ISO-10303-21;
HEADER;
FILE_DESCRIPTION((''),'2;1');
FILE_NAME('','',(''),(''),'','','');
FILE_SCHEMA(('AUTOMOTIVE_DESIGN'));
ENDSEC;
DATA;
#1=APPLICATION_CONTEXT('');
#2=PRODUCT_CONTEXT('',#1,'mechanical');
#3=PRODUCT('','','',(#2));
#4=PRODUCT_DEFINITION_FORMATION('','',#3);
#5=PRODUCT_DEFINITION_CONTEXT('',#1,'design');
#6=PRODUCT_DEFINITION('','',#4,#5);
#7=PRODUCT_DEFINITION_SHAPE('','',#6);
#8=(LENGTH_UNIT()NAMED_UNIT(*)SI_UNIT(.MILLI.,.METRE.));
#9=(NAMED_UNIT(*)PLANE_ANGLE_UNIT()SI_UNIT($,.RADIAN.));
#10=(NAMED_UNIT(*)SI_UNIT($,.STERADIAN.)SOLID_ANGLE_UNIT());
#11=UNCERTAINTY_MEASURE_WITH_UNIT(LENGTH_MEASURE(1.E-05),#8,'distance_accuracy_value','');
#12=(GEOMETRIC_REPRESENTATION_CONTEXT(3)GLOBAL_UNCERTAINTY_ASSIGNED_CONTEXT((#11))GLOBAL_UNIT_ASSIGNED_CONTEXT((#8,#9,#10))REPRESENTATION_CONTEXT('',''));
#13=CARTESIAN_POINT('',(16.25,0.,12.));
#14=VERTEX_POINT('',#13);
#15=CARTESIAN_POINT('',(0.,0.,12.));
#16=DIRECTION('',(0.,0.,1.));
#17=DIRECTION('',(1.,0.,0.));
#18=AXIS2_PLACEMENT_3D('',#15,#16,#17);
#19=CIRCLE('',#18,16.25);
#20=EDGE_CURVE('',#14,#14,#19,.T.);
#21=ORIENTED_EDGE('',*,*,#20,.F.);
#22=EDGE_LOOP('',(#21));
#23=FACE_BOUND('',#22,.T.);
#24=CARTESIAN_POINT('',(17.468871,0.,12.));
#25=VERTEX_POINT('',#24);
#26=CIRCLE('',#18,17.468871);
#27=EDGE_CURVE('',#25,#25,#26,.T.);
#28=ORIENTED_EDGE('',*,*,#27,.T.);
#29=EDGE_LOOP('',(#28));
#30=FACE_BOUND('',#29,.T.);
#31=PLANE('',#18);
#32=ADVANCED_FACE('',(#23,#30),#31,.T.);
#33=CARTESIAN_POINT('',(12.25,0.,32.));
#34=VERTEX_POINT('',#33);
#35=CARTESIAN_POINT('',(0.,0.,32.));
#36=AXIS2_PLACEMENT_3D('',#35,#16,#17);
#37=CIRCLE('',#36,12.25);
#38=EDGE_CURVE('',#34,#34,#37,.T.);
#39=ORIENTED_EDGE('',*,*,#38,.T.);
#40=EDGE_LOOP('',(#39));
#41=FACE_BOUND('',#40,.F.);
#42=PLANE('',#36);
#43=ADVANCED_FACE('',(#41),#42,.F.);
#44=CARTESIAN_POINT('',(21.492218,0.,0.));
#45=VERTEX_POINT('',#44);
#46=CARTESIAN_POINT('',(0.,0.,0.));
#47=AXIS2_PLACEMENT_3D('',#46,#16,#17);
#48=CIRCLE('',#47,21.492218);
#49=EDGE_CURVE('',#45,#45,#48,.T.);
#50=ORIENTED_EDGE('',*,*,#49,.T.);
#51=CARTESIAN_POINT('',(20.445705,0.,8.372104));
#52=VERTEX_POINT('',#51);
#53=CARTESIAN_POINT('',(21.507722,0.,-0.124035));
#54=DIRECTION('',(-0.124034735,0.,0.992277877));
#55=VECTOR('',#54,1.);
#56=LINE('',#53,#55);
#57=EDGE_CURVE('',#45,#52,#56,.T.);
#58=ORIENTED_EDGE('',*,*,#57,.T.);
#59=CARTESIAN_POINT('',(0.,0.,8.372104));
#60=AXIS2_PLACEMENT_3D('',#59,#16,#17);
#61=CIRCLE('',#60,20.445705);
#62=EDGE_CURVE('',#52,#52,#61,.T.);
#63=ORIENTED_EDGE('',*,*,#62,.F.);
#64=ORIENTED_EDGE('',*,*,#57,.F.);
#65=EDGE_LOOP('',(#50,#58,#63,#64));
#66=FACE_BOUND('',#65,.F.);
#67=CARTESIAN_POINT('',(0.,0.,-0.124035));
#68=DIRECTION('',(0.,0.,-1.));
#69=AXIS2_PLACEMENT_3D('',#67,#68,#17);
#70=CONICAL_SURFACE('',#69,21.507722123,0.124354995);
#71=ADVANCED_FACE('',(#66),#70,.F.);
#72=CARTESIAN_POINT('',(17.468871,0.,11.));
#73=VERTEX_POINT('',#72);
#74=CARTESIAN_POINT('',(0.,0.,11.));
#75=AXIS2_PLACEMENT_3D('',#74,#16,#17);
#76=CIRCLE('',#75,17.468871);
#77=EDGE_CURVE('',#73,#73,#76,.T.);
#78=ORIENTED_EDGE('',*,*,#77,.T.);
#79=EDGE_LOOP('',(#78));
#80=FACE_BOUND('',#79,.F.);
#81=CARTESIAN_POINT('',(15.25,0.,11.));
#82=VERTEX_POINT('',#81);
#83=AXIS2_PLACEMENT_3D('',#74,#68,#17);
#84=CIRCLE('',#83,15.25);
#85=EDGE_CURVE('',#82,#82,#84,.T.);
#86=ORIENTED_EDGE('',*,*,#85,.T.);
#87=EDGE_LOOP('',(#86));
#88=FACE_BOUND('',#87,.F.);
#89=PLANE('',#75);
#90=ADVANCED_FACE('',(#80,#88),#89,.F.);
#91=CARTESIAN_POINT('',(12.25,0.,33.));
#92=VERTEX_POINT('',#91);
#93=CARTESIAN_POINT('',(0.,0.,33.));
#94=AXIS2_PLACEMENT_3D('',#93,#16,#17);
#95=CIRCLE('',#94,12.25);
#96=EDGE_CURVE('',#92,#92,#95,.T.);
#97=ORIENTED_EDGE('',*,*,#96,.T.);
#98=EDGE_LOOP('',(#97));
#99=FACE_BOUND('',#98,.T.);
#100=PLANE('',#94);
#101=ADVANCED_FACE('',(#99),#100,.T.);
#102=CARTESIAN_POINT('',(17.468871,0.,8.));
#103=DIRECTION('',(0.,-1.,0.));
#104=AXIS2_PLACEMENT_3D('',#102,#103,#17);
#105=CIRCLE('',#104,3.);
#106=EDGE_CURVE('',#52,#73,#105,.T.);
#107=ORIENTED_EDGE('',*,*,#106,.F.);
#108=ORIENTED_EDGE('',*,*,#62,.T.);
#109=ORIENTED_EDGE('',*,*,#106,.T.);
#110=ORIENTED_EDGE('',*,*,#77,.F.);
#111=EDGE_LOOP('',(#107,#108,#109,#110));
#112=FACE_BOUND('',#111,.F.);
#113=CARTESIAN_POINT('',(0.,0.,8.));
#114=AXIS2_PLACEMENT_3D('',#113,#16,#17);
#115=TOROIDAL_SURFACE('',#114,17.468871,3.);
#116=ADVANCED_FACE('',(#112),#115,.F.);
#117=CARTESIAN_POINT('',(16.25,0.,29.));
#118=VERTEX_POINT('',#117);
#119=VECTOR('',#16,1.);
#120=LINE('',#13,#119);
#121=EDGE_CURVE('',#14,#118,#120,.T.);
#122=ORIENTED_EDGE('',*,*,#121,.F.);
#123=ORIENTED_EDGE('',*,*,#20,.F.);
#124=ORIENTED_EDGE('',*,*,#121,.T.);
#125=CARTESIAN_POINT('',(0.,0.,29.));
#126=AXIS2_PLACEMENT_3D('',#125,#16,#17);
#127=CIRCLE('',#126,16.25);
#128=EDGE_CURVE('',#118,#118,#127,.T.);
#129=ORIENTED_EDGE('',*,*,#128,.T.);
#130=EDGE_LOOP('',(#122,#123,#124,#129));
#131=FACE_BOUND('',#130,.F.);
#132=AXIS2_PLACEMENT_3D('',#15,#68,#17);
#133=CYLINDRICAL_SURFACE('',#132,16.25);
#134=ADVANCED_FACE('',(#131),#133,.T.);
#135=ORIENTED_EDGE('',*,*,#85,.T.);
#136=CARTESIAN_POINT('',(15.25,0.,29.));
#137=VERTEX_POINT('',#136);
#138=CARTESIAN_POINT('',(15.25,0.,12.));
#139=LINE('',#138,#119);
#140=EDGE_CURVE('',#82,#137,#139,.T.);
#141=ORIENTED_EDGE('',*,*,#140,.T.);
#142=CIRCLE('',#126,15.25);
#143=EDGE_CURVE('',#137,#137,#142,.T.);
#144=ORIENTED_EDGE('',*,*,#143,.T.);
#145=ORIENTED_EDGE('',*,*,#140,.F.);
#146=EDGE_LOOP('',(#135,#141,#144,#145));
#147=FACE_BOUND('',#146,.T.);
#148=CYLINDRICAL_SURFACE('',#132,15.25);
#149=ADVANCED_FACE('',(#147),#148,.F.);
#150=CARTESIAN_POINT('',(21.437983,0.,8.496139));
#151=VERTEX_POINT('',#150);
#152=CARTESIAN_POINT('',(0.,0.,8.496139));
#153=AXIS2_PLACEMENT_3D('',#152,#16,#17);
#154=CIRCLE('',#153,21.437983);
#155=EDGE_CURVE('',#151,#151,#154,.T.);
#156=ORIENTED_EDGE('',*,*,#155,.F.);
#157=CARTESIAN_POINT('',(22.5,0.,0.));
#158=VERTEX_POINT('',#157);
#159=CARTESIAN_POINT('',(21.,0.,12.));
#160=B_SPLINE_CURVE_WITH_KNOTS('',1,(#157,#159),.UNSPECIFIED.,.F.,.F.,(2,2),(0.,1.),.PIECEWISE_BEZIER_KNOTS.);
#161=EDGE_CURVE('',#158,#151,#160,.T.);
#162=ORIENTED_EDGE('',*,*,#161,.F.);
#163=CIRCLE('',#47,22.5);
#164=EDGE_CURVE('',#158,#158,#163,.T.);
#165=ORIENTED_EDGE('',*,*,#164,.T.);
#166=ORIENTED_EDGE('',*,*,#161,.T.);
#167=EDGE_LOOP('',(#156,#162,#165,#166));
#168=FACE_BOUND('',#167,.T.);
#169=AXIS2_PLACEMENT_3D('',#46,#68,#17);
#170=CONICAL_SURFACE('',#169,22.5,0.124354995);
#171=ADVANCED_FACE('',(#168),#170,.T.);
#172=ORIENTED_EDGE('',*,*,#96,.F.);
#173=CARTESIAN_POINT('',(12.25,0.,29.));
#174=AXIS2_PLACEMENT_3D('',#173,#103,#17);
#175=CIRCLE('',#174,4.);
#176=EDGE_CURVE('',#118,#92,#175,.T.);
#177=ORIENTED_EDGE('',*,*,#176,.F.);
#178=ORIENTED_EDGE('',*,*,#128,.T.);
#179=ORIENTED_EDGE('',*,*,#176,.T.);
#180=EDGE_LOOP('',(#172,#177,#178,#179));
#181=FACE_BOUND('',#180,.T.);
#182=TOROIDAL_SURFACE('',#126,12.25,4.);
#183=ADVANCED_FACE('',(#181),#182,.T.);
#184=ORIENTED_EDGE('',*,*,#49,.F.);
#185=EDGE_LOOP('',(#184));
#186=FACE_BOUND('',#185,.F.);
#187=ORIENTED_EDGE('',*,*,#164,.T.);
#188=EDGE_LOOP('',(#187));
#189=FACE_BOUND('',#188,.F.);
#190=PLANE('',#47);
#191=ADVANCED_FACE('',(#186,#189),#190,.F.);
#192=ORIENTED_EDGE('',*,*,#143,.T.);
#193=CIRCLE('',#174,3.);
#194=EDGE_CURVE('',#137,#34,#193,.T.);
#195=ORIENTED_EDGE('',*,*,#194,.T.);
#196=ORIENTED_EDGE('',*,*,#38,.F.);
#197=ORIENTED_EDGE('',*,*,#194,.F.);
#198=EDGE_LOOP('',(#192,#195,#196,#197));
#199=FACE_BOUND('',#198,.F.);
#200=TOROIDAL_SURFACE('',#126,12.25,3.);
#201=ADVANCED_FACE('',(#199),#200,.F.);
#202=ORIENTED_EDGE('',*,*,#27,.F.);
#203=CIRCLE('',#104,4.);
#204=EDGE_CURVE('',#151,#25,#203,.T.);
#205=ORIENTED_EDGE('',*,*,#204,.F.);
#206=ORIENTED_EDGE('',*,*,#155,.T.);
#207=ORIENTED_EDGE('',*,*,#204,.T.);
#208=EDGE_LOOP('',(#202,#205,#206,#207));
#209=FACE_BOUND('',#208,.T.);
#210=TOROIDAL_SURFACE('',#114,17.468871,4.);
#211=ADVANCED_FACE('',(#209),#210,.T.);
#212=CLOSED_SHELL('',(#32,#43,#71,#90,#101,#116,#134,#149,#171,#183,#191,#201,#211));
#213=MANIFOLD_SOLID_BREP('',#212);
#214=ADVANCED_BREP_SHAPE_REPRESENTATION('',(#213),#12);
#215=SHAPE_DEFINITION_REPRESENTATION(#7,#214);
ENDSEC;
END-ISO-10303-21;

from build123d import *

# Parameters (mm, degrees)
F0_R     = 22.5
F2_R     = 21
F4_R     = 4
F5_R     = 16.25
F6_DEPTH = 21
F7_R     = 4
F8_T     = -1


with BuildPart() as f3:
    # F0 (on Top) → F3 section 0
    with BuildSketch(Plane.XY):
        Circle(F0_R)
    # F2 (on offset) → F3 section 1
    with BuildSketch(Plane.XY.offset(12)):
        Circle(F2_R)
    loft()

    # F4
    f4_edges = [f3.edges().sort_by_distance(p)[0] for p in [
        (-21, 0, 12),
    ]]
    fillet(f4_edges, radius=F4_R)

    # F5 (on face) → F6 (join)
    with BuildSketch(Plane.XY.offset(12)):
        Circle(F5_R)
    extrude(amount=F6_DEPTH)

    # F7
    f7_edges = [f3.edges().sort_by_distance(p)[0] for p in [
        (-16.25, 0, 33),
    ]]
    fillet(f7_edges, radius=F7_R)

    # F8
    f8_openings = [f3.faces().sort_by_distance(p)[0] for p in [
        (0, 0, 0),
    ]]
    offset(amount=F8_T, openings=f8_openings, kind=Kind.INTERSECTION)


solid = f3.part
